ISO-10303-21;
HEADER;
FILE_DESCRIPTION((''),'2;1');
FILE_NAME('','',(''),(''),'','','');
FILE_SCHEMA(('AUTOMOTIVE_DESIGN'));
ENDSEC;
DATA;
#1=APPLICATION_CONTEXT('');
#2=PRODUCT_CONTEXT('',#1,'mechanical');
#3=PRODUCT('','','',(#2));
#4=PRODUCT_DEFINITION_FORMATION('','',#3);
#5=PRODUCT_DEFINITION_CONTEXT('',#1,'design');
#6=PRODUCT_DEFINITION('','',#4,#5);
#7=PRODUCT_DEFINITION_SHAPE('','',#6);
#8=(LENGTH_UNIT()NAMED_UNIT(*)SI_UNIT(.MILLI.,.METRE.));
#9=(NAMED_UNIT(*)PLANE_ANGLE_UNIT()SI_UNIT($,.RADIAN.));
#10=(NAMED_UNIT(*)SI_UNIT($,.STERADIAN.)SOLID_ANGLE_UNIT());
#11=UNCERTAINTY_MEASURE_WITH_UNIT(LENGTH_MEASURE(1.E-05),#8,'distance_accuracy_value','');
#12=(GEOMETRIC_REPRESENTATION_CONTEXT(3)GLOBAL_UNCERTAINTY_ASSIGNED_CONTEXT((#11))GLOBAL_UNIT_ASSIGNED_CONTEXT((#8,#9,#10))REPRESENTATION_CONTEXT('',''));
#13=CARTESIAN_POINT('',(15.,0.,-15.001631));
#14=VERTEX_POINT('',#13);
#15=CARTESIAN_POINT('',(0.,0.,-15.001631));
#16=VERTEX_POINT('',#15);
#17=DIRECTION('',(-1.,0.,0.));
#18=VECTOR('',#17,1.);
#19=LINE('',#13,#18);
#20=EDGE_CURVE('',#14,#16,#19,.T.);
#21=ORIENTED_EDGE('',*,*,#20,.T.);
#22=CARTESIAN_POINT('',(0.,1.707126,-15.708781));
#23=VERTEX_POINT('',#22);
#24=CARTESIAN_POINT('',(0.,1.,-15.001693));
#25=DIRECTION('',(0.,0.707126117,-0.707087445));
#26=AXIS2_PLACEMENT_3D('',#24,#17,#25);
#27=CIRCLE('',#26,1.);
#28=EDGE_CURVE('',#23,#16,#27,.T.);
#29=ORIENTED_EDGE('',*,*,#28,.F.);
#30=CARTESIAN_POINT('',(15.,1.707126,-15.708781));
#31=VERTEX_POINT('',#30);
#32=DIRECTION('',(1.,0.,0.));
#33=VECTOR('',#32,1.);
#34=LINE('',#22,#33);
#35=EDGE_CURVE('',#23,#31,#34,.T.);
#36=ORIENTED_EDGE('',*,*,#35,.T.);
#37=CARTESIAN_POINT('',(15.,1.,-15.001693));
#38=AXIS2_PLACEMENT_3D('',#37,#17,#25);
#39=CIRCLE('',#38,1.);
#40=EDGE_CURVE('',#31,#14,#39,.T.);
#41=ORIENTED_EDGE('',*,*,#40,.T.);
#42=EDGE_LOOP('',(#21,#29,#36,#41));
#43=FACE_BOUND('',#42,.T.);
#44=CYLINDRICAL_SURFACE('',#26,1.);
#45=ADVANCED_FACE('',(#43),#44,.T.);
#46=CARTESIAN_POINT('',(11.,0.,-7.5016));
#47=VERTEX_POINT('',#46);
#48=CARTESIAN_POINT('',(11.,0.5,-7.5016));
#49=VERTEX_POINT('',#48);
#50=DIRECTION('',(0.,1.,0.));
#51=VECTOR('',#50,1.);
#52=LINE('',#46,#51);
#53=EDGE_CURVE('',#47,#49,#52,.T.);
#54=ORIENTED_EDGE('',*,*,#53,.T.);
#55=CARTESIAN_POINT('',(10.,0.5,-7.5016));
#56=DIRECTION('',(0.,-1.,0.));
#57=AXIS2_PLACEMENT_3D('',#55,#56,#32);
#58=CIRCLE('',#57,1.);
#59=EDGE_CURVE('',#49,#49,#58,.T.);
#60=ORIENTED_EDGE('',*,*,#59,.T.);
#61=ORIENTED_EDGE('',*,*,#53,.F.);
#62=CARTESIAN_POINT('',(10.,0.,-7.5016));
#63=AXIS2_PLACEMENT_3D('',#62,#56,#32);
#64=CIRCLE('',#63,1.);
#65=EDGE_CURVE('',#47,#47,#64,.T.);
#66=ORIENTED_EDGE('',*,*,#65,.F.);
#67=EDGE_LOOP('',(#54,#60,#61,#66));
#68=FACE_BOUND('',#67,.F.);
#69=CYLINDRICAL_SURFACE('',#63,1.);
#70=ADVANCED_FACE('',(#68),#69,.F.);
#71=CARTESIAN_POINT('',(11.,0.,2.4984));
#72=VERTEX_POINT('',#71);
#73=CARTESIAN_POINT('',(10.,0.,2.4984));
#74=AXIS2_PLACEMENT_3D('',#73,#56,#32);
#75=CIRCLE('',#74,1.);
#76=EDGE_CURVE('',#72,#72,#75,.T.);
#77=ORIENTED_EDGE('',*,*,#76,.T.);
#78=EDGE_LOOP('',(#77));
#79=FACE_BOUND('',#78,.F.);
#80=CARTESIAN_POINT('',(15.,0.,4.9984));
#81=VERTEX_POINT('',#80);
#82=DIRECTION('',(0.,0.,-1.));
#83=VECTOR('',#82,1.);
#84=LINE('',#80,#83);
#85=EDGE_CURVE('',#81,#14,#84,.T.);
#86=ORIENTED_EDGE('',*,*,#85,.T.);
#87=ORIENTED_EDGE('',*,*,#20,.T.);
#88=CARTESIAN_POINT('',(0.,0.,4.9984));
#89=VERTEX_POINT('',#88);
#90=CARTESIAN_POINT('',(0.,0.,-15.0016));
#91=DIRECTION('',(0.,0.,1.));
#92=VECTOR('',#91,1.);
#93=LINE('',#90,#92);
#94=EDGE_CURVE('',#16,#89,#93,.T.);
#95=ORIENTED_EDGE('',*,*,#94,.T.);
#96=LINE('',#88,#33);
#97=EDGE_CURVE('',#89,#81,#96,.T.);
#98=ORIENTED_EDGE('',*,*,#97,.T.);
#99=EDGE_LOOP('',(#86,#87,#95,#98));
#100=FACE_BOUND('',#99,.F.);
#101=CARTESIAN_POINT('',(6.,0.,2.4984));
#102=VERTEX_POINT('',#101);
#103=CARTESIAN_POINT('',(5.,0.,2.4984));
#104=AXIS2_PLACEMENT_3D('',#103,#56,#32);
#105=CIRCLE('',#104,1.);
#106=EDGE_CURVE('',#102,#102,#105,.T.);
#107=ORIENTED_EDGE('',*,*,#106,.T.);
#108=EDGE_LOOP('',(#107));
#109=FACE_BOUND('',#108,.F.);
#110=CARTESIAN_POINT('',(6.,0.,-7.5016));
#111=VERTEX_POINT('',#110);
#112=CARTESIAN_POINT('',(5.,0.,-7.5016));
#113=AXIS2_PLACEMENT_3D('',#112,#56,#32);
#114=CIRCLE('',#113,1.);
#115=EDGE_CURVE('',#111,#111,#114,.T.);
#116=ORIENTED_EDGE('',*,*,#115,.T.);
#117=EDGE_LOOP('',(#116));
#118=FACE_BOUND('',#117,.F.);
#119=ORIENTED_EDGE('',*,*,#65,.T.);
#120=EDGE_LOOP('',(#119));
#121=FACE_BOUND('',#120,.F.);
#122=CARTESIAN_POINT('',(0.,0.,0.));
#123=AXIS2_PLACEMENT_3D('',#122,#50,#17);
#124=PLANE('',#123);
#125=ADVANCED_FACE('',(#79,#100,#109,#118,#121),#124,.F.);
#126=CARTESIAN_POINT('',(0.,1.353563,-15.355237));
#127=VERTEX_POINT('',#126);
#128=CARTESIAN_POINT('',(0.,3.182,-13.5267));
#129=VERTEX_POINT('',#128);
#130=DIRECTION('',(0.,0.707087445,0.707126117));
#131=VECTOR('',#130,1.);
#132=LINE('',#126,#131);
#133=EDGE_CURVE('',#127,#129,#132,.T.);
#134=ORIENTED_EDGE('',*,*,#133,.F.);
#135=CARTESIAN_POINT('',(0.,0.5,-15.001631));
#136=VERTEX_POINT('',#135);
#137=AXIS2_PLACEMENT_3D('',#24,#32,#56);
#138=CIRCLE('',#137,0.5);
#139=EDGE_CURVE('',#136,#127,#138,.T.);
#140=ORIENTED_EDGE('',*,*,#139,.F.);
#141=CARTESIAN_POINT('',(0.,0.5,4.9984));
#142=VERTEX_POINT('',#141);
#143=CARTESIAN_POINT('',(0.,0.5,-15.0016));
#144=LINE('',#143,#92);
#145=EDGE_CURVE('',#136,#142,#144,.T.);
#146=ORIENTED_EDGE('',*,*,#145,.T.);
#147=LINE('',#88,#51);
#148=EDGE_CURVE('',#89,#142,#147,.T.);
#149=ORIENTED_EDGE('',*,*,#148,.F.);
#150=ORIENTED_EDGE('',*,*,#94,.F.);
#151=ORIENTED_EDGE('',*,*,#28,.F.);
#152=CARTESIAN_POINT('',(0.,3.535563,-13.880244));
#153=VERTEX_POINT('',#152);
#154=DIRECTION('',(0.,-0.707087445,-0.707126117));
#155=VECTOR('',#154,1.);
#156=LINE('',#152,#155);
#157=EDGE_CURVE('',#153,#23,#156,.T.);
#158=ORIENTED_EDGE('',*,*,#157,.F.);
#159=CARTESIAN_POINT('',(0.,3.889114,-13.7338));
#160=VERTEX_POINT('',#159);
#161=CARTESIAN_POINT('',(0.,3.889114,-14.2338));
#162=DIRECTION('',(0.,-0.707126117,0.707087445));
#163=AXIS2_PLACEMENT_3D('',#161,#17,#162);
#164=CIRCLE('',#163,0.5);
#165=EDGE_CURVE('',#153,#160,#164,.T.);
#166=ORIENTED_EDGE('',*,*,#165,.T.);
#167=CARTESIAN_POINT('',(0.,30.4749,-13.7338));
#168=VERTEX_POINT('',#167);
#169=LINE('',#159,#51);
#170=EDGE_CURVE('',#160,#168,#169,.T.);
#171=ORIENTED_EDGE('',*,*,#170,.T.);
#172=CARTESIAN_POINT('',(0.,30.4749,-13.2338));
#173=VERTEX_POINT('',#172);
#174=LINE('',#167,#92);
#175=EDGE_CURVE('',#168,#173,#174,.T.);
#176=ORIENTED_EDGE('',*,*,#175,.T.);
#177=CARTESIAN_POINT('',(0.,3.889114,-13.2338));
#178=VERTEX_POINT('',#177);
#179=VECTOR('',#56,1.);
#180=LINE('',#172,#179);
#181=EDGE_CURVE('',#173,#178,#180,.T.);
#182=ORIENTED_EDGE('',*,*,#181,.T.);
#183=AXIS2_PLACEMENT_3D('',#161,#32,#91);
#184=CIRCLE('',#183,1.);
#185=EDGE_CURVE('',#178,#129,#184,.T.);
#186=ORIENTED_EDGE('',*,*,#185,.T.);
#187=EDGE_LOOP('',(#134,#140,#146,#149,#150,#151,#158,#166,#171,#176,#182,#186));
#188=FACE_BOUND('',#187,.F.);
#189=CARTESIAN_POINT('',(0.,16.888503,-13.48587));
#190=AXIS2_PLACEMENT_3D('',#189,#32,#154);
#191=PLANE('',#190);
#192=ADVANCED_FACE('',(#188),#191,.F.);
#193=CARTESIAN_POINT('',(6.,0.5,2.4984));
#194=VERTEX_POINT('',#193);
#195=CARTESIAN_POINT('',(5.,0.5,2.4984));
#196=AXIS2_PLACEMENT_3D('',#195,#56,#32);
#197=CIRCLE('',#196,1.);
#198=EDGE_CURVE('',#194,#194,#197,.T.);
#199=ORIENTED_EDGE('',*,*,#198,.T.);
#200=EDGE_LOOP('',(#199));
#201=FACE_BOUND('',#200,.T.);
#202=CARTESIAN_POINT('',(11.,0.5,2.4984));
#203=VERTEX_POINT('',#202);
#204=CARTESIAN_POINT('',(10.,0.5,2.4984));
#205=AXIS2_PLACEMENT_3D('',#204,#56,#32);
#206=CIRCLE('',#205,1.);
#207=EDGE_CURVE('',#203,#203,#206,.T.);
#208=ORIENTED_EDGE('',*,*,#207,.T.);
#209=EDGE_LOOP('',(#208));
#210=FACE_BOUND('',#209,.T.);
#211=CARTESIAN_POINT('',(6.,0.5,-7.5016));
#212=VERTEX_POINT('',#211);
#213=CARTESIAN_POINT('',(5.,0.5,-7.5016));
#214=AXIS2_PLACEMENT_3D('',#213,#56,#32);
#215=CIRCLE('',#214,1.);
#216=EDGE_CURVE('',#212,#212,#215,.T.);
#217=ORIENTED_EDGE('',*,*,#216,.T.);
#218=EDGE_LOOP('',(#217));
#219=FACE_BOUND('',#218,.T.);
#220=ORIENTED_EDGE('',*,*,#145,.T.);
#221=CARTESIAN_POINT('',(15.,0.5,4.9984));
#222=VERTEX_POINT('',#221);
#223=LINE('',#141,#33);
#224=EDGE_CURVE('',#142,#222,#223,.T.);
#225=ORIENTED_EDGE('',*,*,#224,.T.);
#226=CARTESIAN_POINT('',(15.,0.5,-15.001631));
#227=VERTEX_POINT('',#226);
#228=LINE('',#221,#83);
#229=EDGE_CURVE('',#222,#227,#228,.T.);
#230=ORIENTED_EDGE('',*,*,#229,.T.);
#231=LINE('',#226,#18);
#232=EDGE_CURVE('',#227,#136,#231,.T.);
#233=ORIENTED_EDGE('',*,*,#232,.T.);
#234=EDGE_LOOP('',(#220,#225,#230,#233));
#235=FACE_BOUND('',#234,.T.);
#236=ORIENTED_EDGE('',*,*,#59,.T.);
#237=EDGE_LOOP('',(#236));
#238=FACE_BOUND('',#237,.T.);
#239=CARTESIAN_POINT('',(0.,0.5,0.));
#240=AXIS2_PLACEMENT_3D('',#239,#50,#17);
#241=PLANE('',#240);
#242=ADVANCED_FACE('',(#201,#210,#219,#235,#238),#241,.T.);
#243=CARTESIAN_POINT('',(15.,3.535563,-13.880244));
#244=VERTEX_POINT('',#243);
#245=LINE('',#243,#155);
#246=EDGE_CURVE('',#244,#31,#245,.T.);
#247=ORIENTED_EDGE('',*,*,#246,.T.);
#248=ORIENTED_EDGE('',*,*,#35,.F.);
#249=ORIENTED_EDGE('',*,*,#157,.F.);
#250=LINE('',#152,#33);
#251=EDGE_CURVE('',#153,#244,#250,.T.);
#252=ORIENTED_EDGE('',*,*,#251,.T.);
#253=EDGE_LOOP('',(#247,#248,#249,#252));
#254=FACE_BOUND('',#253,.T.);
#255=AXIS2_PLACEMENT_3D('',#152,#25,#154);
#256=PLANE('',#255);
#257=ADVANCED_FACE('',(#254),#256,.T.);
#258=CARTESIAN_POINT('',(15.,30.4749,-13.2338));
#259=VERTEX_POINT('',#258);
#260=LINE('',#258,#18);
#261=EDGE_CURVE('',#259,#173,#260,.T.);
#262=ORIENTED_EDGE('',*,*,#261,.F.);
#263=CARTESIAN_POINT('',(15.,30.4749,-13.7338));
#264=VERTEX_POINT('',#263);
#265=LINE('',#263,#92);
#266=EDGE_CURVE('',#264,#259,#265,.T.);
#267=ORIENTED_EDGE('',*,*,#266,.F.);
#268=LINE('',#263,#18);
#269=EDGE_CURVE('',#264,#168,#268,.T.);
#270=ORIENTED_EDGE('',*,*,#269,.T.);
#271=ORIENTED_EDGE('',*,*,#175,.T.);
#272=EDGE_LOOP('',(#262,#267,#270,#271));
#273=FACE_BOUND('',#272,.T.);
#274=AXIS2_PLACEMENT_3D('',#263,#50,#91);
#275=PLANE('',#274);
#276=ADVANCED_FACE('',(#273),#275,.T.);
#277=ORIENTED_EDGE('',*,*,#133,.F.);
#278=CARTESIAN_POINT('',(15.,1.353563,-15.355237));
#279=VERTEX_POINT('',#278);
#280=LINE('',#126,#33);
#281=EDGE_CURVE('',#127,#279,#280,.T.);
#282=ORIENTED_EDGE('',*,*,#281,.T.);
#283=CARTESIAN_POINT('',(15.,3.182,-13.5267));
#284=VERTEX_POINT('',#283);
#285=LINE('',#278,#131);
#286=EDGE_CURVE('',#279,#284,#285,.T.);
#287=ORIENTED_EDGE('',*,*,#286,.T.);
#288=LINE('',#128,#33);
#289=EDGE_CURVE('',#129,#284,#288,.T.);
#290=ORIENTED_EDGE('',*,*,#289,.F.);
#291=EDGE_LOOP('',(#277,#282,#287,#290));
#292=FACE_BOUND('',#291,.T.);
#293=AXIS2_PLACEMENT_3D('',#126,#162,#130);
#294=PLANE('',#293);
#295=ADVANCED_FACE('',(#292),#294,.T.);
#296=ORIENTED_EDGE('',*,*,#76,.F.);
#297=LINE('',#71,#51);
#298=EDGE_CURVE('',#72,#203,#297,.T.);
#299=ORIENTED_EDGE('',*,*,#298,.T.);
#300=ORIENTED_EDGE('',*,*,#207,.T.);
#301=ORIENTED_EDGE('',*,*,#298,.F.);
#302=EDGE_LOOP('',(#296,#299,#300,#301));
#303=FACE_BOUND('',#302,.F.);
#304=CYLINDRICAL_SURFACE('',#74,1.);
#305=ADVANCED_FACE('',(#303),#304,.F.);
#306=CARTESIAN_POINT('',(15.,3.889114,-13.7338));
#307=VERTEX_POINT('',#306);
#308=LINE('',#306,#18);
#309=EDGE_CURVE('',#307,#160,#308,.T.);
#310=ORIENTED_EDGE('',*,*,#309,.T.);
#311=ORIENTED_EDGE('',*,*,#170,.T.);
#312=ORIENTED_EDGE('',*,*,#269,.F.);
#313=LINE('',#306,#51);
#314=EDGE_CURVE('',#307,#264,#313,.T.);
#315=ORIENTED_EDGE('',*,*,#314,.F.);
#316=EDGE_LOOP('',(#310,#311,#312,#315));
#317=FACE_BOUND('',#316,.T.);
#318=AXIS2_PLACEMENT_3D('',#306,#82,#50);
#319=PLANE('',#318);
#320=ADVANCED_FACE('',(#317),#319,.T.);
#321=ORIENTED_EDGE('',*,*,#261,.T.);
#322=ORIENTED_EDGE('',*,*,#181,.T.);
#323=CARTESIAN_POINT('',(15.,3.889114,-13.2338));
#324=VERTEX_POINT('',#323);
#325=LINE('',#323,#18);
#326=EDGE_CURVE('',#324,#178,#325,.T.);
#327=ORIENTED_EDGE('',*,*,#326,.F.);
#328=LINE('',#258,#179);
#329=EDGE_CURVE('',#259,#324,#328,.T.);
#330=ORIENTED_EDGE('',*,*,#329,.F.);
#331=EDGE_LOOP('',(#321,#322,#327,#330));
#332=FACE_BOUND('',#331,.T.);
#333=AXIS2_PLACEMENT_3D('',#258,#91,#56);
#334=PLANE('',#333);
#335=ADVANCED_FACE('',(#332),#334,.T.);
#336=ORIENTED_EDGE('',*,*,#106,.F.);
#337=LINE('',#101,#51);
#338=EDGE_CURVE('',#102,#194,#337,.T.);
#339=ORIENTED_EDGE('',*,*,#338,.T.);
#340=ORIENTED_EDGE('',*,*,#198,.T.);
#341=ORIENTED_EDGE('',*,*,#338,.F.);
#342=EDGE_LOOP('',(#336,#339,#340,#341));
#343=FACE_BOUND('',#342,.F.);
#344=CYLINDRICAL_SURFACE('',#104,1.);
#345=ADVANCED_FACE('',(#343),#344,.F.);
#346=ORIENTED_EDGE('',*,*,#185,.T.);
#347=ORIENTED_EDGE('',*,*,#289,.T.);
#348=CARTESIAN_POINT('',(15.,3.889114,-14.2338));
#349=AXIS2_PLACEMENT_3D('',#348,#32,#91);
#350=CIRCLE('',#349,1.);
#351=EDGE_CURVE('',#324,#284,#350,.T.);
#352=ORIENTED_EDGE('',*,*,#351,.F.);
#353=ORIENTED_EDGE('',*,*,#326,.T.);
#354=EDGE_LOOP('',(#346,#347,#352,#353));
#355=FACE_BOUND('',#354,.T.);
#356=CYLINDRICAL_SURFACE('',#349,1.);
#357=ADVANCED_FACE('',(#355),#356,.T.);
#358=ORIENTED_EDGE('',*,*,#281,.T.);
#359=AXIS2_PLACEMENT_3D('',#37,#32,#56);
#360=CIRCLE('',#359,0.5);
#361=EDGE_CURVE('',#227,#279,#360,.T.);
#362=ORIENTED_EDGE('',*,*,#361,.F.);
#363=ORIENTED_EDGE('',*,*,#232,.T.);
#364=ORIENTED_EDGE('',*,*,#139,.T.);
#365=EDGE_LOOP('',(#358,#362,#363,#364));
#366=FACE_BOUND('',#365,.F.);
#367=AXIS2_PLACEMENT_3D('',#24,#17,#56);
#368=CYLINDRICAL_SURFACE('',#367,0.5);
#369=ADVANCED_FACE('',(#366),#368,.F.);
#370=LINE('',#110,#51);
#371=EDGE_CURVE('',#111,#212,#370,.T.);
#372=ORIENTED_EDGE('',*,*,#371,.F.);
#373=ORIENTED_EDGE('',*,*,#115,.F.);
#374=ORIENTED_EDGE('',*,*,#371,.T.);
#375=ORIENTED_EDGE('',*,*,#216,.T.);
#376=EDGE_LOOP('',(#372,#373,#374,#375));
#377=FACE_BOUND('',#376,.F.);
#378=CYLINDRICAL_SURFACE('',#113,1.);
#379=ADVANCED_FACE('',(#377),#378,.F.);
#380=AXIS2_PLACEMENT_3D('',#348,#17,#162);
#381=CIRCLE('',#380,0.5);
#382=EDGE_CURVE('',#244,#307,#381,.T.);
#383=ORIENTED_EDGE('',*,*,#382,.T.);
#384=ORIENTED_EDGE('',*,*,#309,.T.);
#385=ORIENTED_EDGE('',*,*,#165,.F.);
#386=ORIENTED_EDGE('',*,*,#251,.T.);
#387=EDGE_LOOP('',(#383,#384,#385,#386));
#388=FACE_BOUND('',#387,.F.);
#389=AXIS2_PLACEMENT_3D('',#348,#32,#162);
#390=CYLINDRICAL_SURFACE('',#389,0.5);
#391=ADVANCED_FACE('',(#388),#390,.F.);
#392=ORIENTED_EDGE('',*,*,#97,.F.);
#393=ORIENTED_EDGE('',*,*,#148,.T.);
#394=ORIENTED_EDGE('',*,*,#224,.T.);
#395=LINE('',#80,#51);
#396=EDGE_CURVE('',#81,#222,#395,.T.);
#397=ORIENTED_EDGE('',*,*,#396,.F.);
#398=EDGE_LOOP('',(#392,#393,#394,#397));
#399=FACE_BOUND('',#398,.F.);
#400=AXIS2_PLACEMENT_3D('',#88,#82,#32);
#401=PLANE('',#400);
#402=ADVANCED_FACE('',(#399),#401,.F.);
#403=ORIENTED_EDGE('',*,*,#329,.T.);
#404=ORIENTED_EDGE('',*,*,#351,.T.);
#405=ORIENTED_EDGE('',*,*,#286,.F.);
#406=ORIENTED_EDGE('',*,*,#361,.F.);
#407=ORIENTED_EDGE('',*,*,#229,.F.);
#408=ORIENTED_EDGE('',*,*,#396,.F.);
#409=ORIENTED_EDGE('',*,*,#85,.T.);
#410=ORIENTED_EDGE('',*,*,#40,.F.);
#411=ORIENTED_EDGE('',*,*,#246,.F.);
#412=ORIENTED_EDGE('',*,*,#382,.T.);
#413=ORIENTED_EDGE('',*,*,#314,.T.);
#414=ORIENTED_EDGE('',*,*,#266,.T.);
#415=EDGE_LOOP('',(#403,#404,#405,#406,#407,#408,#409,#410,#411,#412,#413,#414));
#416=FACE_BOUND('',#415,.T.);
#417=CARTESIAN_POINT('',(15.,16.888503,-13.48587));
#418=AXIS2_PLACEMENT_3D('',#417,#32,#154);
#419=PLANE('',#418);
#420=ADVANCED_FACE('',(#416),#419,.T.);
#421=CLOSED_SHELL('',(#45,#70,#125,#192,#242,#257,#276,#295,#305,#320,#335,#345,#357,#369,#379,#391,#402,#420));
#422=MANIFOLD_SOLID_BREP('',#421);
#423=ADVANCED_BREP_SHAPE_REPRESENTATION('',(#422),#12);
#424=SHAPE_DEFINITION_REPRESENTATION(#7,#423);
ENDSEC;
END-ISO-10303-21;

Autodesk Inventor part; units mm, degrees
ref_plane "YZ Plane" through (0, 0, 0) normal (1, 0, 0) x (0, 1, 0)
ref_plane "XZ Plane" through (0, 0, 0) normal (0, 1, 0) x (-1, 0, 0)
ref_plane "XY Plane" through (0, 0, 0) normal (0, 0, 1) x (1, 0, 0)
sketch "Sketch1" plane through (0, 0, 0) normal (0, 1, 0) x (-1, 0, 0)
  line L0 (0, 4.9984) -> (-15, 4.9984)
  line L1 (-15, 4.9984) -> (-15, -15.0016)
  line L2 (-15, -15.0016) -> (0, -15.0016)
  line L3 (0, -15.0016) -> (0, 4.9984)
  dimension "d0" = 15
  dimension "d1" = 20
extrude "Plate1" add sketch "Sketch1" along normal blind 0.5
sketch "Sketch2" plane through (0, 1.3536, -15.3552) normal (0, 0.7071068, -0.7071068) x (-1, 0, 0)
  line L0 (-15, 0) -> (0, 0)
  line L1 (0, 0) -> (0, 2.5858)
  line L2 (0, 2.5858) -> (-15, 2.5858)
  line L3 (-15, 2.5858) -> (-15, 0)
edge flange "Flange1" height 5 angle 135 thickness 0.5 bend radius 0.5 thickness toward (0, 0.7071068, -0.7071068) relief tear relief width 0.5 relief depth 0.25 edges at (7.5, 0.5, -15.0016) wall of the first edge with corners at (15, 1.3536, -15.3552) (0, 1.3536, -15.3552) (0, 3.182, -13.5267) (15, 3.182, -13.5267)
bend "Bend1"
corner "Corner1"
sketch "Sketch3" plane through (15, 3.8891, -13.7338) normal (0, 0, 1) x (1, 0, 0)
  line L0 (-15, 0) -> (0, 0)
  line L1 (0, 0) -> (0, 26.5858)
  line L2 (0, 26.5858) -> (-15, 26.5858)
  line L3 (-15, 26.5858) -> (-15, 0)
edge flange "Flange2" height 27 angle 45 thickness 0.5 bend radius 0.5 thickness toward (0, 0, 1) relief tear relief width 0.5 relief depth 0.25 edges at (7.5, 3.5355, -13.8803) wall of the first edge with corners at (0, 3.8891, -13.7338) (15, 3.8891, -13.7338) (15, 30.4749, -13.7338) (0, 30.4749, -13.7338)
bend "Bend2"
corner "Corner2"
sketch "Sketch4" plane through (0, 0, 0) normal (0, -1, 0) x (1, 0, 0)
  circle A0 centre (10, 2.4984) radius 1 projected
  circle A1 centre (5, 2.4984) radius 1 projected
  circle A2 centre (5, -7.5016) radius 1 projected
  circle A3 centre (10, -7.5016) radius 1 projected
  point P0 (0, 0)
extrude "Extrusion1" cut sketch "Sketch4" against normal blind 10
equation "\"d2\" = Thickness"
equation "\"d3\" = BendReliefWidth"
equation "\"d4\" = BendReliefDepth"
equation "\"d5\" = MinimumRemnant"
equation "\"d6\" = TransitionRadius"
equation "\"d9\" = BendRadius"
equation "\"d10\" = CornerReliefSize"
equation "\"d11\" = GapSize"
equation "\"d12\" = JacobiRadiusSize"
equation "\"d13\" = BendReliefWidth"
equation "\"d14\" = BendReliefDepth"
equation "\"d15\" = MinimumRemnant"
equation "\"d16\" = TransitionRadius"
equation "\"d19\" = BendRadius"
equation "\"d20\" = CornerReliefSize"
equation "\"d21\" = GapSize"
equation "\"d22\" = JacobiRadiusSize"
equation "\"BendRadius\" = Thickness"
equation "\"BendReliefWidth\" = Thickness"
equation "\"BendReliefDepth\" = 0.5 * Thickness"
equation "\"CornerReliefSize\" = 4 * Thickness"
equation "\"MinimumRemnant\" = 2 * Thickness"
equation "\"TransitionRadius\" = BendRadius"
equation "\"JacobiRadiusSize\" = BendRadius"
equation "\"GapSize\" = Thickness"
equation "\"Thickness\" = 0.5"
properties part number "LaminaResorte" material "Stainless Steel"
